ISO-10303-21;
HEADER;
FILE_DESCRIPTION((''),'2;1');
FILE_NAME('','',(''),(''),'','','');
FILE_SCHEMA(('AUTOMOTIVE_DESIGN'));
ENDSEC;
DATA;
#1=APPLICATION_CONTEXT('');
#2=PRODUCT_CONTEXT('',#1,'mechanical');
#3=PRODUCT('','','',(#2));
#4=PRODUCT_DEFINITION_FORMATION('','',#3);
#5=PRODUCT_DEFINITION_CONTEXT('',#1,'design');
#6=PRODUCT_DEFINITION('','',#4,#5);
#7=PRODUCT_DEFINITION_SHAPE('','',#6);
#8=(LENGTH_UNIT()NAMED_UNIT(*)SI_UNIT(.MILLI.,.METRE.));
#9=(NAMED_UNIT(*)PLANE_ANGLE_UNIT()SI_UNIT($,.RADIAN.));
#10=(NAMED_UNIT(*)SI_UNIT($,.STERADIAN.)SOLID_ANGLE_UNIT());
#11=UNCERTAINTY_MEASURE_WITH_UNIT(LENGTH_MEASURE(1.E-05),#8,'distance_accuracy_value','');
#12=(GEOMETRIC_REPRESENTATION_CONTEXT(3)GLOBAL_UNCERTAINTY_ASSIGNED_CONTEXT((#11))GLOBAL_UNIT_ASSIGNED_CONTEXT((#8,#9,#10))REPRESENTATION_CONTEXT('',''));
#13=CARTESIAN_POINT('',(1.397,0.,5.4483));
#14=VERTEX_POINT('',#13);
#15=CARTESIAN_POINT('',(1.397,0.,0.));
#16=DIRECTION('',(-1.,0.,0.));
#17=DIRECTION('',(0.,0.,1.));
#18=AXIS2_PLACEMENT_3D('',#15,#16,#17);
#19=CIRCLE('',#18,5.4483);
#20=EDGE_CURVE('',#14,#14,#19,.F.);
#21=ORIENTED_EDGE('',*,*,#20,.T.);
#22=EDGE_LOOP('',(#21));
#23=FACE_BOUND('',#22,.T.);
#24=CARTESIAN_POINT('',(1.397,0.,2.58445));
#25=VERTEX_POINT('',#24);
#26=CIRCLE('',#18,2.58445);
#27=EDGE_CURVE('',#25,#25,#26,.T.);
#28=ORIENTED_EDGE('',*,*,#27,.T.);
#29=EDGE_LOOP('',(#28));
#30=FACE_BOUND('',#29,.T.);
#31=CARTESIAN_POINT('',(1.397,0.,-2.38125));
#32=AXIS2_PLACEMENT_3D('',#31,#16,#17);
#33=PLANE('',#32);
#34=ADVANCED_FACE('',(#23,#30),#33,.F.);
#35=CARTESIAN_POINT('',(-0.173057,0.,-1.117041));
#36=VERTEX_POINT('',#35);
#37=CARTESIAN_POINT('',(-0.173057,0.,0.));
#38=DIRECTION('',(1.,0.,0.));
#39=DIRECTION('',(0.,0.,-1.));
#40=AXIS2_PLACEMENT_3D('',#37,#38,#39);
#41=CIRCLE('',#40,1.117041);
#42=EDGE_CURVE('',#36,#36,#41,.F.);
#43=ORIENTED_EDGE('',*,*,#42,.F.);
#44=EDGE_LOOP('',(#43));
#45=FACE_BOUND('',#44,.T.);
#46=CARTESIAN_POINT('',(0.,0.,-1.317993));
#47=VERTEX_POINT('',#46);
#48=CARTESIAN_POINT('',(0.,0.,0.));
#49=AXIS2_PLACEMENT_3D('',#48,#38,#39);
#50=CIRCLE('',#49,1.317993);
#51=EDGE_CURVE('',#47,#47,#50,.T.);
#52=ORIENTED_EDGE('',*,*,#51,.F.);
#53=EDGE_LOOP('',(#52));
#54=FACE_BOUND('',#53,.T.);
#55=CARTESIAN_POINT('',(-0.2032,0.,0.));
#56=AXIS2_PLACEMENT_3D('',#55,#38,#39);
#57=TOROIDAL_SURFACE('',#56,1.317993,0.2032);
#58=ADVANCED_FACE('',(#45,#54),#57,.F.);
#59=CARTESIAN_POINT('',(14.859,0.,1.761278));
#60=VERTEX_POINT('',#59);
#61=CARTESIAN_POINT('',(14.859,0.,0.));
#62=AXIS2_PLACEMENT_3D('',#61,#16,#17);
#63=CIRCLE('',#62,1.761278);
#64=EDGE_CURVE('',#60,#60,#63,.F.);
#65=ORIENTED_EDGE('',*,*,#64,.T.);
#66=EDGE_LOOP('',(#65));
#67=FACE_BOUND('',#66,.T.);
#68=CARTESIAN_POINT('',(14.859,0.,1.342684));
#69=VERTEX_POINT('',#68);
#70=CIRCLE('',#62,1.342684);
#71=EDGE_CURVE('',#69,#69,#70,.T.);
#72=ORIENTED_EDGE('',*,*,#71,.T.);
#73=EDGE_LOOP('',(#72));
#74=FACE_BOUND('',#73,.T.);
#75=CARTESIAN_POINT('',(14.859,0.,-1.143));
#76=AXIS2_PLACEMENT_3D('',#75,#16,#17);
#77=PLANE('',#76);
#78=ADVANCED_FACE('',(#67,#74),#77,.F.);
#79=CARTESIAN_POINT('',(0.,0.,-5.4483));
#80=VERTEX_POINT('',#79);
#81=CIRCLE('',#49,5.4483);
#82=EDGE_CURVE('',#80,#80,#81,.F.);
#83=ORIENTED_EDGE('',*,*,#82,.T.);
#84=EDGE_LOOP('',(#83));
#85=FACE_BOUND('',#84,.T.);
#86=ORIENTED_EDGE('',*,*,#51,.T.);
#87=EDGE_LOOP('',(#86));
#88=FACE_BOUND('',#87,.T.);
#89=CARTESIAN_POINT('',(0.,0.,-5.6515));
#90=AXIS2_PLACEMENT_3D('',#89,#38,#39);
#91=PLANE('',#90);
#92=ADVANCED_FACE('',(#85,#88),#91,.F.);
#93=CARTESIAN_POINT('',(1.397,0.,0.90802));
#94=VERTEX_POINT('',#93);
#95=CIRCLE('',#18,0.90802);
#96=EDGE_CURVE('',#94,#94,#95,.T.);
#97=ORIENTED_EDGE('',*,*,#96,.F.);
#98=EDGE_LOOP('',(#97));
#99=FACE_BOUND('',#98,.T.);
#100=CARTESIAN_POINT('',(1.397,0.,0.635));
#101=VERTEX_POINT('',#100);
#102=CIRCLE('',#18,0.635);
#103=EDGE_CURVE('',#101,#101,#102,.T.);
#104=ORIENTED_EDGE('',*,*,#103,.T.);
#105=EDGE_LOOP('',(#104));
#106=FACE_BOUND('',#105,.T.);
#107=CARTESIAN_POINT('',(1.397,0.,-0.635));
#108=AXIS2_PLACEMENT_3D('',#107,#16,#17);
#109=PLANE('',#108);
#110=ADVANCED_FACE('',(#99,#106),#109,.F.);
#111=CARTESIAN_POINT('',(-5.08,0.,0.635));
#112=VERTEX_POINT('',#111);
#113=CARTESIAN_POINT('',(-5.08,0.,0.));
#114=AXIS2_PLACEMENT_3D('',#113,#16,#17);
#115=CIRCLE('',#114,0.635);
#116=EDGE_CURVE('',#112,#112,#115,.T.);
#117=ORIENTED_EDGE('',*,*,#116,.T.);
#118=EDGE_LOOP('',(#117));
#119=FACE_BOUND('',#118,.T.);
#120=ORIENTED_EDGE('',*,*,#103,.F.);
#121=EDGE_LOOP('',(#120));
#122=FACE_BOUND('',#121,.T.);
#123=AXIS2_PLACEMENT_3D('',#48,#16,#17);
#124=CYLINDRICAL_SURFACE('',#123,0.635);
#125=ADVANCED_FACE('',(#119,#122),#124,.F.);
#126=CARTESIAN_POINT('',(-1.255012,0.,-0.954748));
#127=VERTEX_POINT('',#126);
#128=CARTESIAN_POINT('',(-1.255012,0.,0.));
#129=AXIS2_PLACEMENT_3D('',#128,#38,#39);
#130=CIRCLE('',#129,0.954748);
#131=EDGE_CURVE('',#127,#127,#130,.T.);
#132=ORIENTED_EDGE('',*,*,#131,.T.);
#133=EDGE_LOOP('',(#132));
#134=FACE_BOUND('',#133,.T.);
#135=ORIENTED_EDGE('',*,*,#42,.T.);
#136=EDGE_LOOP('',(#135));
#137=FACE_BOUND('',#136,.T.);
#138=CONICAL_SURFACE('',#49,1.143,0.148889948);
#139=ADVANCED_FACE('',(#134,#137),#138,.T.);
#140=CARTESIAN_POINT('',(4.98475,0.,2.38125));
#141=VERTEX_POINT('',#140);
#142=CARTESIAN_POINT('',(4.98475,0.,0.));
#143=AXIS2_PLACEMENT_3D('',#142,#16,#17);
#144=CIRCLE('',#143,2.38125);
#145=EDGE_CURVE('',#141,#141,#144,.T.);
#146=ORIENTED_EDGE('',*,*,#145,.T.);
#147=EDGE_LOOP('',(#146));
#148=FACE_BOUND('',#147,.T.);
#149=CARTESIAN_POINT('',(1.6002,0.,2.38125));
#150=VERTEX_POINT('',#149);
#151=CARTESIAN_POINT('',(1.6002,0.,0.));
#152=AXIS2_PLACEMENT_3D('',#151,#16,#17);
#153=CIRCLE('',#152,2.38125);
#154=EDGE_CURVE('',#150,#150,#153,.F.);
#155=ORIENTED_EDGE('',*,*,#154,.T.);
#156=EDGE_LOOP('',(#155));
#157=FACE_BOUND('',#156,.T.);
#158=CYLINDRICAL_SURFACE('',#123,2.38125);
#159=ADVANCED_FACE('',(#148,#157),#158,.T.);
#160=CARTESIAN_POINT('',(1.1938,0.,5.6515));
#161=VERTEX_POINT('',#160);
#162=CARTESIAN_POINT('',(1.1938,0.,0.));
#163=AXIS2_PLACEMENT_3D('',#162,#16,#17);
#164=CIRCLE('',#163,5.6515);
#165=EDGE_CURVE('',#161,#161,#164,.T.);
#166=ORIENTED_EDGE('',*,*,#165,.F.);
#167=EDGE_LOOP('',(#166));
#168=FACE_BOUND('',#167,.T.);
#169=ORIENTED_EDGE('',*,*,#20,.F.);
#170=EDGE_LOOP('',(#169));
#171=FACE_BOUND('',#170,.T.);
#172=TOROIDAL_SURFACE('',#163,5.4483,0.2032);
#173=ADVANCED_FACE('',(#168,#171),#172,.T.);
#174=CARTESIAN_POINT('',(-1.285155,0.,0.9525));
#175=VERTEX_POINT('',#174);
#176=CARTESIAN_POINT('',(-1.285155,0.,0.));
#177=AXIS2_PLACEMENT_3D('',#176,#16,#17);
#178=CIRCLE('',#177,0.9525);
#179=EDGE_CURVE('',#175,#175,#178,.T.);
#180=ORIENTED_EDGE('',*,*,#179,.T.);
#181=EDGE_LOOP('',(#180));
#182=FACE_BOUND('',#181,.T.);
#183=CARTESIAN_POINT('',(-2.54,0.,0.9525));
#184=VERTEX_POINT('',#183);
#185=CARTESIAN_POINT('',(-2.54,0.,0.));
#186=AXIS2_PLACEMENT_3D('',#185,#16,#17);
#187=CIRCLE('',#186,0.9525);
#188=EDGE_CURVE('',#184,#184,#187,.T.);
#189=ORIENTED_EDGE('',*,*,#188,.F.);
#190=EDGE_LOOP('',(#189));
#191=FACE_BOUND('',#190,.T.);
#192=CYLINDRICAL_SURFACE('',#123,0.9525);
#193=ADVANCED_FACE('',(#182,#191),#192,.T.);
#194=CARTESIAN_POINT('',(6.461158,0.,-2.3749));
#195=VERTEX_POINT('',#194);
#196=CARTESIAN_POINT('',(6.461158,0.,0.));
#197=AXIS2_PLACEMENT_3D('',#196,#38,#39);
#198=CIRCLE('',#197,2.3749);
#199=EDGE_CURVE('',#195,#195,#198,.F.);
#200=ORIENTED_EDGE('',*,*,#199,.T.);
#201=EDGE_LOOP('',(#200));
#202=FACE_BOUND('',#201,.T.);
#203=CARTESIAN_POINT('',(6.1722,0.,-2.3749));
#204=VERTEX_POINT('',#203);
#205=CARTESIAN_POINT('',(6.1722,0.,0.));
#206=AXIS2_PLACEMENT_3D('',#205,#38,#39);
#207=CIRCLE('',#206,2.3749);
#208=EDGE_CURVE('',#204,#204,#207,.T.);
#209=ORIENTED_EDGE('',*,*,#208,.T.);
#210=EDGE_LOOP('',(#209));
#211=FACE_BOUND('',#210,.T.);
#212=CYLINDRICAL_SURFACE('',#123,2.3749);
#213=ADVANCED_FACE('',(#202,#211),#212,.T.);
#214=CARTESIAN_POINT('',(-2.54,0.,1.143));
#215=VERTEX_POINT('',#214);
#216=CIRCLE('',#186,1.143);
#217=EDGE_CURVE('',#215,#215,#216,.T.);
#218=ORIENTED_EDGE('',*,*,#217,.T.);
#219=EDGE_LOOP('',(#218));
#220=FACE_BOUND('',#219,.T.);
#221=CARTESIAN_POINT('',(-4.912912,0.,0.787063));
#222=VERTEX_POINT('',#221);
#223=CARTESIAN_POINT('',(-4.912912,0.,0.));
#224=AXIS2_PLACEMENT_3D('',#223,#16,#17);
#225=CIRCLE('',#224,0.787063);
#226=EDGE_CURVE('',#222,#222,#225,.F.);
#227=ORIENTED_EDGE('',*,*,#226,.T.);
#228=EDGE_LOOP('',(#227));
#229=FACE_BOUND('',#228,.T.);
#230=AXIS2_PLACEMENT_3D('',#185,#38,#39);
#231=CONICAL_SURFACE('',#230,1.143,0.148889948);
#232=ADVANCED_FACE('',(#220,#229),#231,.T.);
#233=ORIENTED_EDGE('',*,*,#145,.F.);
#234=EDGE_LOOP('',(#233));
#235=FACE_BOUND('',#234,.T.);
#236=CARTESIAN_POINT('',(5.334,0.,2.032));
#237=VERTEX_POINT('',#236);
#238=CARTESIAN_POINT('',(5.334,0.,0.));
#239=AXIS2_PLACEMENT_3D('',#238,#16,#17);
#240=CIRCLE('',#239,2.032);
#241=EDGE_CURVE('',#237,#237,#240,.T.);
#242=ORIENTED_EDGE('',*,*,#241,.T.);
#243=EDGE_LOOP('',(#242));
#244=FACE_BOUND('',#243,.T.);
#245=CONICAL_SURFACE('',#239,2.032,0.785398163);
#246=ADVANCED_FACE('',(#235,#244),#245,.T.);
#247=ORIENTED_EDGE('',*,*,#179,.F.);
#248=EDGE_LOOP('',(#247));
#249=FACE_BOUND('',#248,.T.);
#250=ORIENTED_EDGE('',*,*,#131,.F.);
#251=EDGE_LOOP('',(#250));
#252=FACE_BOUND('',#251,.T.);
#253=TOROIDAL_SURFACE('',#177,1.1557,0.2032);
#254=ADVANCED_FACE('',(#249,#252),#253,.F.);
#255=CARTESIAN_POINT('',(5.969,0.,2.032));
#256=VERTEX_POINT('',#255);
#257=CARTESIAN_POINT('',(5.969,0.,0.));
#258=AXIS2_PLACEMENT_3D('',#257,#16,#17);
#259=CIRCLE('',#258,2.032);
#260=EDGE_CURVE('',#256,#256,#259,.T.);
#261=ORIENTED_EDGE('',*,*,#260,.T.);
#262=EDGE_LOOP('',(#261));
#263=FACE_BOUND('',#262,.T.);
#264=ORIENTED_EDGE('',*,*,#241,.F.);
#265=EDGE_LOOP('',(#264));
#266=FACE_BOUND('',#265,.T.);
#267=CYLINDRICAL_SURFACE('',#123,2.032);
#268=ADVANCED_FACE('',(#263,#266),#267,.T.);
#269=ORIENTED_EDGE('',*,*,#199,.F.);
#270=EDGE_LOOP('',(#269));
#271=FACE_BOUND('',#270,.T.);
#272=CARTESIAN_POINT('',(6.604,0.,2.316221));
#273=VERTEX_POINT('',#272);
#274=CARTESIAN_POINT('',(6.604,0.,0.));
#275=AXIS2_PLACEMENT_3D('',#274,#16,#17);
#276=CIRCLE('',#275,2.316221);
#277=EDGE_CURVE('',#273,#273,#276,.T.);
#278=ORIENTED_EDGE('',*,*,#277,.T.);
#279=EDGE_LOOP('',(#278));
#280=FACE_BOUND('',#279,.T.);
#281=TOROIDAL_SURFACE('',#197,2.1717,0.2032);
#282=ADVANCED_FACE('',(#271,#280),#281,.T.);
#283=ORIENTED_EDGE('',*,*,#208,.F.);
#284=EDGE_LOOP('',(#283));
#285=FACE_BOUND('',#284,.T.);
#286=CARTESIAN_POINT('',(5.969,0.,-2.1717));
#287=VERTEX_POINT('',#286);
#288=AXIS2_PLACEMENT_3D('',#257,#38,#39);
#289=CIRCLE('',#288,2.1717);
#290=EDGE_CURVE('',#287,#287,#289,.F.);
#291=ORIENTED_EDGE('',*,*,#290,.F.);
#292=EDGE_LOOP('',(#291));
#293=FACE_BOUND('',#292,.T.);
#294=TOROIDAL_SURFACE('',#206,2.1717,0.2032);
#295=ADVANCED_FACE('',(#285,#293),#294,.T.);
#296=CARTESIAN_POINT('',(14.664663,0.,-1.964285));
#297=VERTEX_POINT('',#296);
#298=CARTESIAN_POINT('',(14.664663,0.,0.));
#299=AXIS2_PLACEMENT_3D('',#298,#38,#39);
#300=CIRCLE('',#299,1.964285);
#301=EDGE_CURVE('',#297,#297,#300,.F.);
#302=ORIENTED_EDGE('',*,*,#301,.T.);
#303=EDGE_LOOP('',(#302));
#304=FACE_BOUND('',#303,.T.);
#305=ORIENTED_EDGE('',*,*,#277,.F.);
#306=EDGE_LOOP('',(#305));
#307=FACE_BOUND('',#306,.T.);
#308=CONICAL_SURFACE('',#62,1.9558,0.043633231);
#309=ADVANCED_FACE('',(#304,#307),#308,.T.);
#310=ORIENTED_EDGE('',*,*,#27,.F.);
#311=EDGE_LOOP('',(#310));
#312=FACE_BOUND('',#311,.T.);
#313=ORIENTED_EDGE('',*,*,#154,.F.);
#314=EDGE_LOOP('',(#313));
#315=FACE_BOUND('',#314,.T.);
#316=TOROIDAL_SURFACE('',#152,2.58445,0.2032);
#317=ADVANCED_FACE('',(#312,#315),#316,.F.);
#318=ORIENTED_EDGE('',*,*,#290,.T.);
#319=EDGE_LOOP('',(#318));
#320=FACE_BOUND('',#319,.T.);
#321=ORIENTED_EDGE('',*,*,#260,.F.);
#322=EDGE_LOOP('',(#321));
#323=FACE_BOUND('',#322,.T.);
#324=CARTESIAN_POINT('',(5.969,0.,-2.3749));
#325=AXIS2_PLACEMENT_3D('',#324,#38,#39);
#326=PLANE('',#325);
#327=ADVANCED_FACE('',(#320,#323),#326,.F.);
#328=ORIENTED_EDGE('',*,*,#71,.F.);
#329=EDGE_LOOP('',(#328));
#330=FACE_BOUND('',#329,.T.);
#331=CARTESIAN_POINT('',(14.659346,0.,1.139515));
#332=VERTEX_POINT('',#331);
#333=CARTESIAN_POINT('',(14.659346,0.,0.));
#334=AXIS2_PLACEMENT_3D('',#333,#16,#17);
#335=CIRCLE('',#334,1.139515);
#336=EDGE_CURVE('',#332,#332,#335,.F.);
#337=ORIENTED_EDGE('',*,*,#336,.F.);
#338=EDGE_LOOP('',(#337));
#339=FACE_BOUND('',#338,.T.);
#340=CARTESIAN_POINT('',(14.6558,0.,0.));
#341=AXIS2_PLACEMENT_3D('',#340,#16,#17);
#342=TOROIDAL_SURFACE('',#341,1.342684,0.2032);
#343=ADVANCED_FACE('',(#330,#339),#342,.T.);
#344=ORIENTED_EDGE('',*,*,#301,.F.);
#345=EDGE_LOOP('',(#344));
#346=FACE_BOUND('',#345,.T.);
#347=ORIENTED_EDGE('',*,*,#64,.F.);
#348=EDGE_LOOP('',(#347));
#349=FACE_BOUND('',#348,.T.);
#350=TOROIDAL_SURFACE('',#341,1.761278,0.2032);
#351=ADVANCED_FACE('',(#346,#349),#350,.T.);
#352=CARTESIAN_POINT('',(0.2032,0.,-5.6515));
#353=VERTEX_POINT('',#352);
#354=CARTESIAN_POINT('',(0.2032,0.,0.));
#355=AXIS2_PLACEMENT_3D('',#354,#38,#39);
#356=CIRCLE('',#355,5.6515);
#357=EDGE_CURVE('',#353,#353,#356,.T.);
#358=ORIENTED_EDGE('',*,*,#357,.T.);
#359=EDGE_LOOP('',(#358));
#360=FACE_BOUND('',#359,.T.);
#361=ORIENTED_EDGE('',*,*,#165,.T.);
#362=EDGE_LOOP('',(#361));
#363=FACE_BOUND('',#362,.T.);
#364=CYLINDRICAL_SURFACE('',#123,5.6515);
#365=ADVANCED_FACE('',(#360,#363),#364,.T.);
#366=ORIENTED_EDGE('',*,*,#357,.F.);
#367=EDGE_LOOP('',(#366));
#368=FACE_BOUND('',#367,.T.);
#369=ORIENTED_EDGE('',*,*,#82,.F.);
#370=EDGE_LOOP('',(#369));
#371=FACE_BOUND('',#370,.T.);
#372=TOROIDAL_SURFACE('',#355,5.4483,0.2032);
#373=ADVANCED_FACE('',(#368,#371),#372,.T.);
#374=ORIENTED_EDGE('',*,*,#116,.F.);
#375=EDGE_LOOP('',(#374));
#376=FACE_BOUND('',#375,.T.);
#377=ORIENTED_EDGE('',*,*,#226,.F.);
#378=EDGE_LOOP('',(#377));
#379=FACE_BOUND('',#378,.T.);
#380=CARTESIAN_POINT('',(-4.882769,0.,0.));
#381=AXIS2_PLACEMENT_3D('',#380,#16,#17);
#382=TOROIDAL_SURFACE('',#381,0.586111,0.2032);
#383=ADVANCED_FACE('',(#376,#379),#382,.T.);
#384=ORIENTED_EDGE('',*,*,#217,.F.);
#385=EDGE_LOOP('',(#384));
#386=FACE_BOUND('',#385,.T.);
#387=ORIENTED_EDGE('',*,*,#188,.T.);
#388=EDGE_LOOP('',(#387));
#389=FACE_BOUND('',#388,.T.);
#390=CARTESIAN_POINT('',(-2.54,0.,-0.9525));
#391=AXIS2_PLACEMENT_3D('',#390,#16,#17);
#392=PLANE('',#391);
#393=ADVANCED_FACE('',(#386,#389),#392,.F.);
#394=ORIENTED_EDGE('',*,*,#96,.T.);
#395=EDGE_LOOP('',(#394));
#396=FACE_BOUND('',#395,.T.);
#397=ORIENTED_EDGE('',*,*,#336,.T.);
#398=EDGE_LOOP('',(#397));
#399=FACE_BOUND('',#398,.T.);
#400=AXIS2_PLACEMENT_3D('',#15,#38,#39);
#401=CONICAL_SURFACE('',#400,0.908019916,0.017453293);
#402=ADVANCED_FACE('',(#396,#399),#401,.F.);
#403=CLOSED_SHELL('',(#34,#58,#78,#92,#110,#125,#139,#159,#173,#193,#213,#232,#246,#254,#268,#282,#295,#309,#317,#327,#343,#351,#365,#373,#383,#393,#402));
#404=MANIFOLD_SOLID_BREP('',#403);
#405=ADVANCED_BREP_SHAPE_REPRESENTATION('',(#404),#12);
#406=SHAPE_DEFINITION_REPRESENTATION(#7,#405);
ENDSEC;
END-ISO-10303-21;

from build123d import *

# Parameters (mm, degrees)
FILLET1_R = 0.2032


with BuildPart() as part:
    # Sketch1 → Revolve1 (revolve)
    with BuildSketch(Plane(origin=(0, 0, 0), x_dir=(1, 0, 0), z_dir=(0, 1, 0)), mode=Mode.PRIVATE) as revolve1_sk:
        Polygon((1.3970000000000002, 0.9080199159363341), (14.858999999999998, 1.143), (14.858999999999998, 1.9557999999999998), (6.603999999999999, 2.3162210837097064), (6.603999999999999, 2.3749000000000002), (5.9689999999999985, 2.3749000000000002), (5.9689999999999985, 2.032), (5.333999999999999, 2.0319999999999996), (4.98475, 2.38125), (1.3970000000000005, 2.381249999999999), (1.3970000000000005, 5.6515), (0, 5.6515), (5.5e-16, 1.143), (-1.2699999999999994, 0.9525000000000002), (-2.5400000000000005, 0.9525000000000001), (-2.5400000000000005, 1.143), (-5.079999999999999, 0.762), (-5.079999999999999, 0.635), (1.397000000000001, 0.635), align=None)
    revolve(revolve1_sk.sketch.rotate(Axis((0, 0, 0), (1, 0, 0)), 180), axis=Axis((0, 0, 0), (1, 0, 0)))

    # Fillet1
    # the kernel refuses this fillet: 0.2032 mm, written as the material it adds along each edge
    with BuildSketch(Plane(origin=(-1.2699999999999994, 0, 0), x_dir=(0, 1.2e-16, 1), z_dir=(0, 1, -1.2e-16))) as fillet1_piece_1:
        with BuildLine():
            CenterArc((0.9525000000000002 + FILLET1_R, -FILLET1_R * 0.0745828053856), FILLET1_R, 171.46923439005187, 8.530765609948162)
            Line((0.9525000000000001, -FILLET1_R * 0.0745828053856), (0.9525000000000002, 0))
            Line((0.9525000000000002, 0), (0.9525000000000002 + FILLET1_R * 0.0110636471317, FILLET1_R * 0.0737576475447))
        make_face()
    revolve(axis=Axis((-1.2699999999999994, 0, 0), (1, 0, 0)))
    with BuildSketch(Plane(origin=(5.5e-16, 0, 0), x_dir=(0, 1.2e-16, 1), z_dir=(0, 1, -1.2e-16))) as fillet1_piece_2:
        with BuildLine():
            CenterArc((1.143 + FILLET1_R * 0.861187420808, -FILLET1_R), FILLET1_R, 90, 81.46923439005175)
            Line((1.143 - FILLET1_R * 0.12774893206, -FILLET1_R * 0.85165954707), (1.143, 0))
            Line((1.143, 0), (1.143 + FILLET1_R * 0.861187420808, -5.5e-16))
        make_face()
    revolve(axis=Axis((5.5e-16, 0, 0), (1, 0, 0)))
    with BuildSketch(Plane(origin=(1.3970000000000005, 0, 0), x_dir=(0, 1.2e-16, 1), z_dir=(0, 1, -1.2e-16))) as fillet1_piece_3:
        with BuildLine():
            CenterArc((2.381249999999999 + FILLET1_R, FILLET1_R), FILLET1_R, 180, 89.99999999999977)
            Line((2.381249999999999 + FILLET1_R, 0), (2.381249999999999, 0))
            Line((2.381249999999999, 0), (2.38125, FILLET1_R))
        make_face()
    revolve(axis=Axis((1.3970000000000005, 0, 0), (1, 0, 0)))
    # the kernel refuses this fillet: 0.2032 mm, written as the material it takes off along each edge
    with BuildSketch(Plane(origin=(-5.079999999999999, 0, 0), x_dir=(0, 1.2e-16, 1), z_dir=(0, 1, -1.2e-16))) as fillet1_2_piece_1:
        with BuildLine():
            CenterArc((0.5861113953629584, 0.19723119514073506), FILLET1_R, 283.92157342879153, 67.54766096126022)
            Line((0.7870632622657965, 0.16708841510530892), (0.762, 0))
            Line((0.762, 0), (0.6350000000000002, -8.9e-16))
        make_face()
    revolve(axis=Axis((-5.079999999999999, 0, 0), (1, 0, 0)), mode=Mode.SUBTRACT)
    with BuildSketch(Plane(origin=(0, 0, 0), x_dir=(0, 1.2e-16, 1), z_dir=(0, 1, -1.2e-16))) as fillet1_2_piece_2:
        with BuildLine():
            CenterArc((5.6515 - FILLET1_R, FILLET1_R), FILLET1_R, 270, 90.00000000000001)
            Line((5.6515, FILLET1_R), (5.6515, 0))
            Line((5.6515, 0), (5.6515 - FILLET1_R, 0))
        make_face()
    revolve(axis=Axis((0, 0, 0), (1, 0, 0)), mode=Mode.SUBTRACT)
    with BuildSketch(Plane(origin=(1.3970000000000005, 0, 0), x_dir=(0, 1.2e-16, 1), z_dir=(0, 1, -1.2e-16))) as fillet1_2_piece_3:
        with BuildLine():
            CenterArc((5.6515 - FILLET1_R, -FILLET1_R), FILLET1_R, 0, 90)
            Line((5.6515, -FILLET1_R), (5.6515, 0))
            Line((5.6515, 0), (5.6515 - FILLET1_R, 0))
        make_face()
    revolve(axis=Axis((1.3970000000000005, 0, 0), (1, 0, 0)), mode=Mode.SUBTRACT)
    with BuildSketch(Plane(origin=(5.9689999999999985, 0, 0), x_dir=(0, 1.2e-16, 1), z_dir=(0, 1, -1.2e-16))) as fillet1_2_piece_4:
        with BuildLine():
            CenterArc((2.3749000000000002 - FILLET1_R, FILLET1_R), FILLET1_R, 270, 90)
            Line((2.3749000000000002 - FILLET1_R, 0), (2.3749000000000002, 0))
            Line((2.3749000000000002, 0), (2.3749000000000002, FILLET1_R))
        make_face()
    revolve(axis=Axis((5.9689999999999985, 0, 0), (1, 0, 0)), mode=Mode.SUBTRACT)
    with BuildSketch(Plane(origin=(6.603999999999999, 0, 0), x_dir=(0, 1.2e-16, 1), z_dir=(0, 1, -1.2e-16))) as fillet1_2_piece_5:
        with BuildLine():
            CenterArc((2.1717000000000004, -0.14284220791969027), FILLET1_R, 0, 44.66526203773208)
            Line((2.3749000000000002, -0.14284220791969027), (2.3749000000000002, 0))
            Line((2.3749000000000002, 0), (2.316221083709707, 0))
        make_face()
    revolve(axis=Axis((6.603999999999999, 0, 0), (1, 0, 0)), mode=Mode.SUBTRACT)
    with BuildSketch(Plane(origin=(14.858999999999998, 0, 0), x_dir=(0, 1.2e-16, 1), z_dir=(0, 1, -1.2e-16))) as fillet1_2_piece_6:
        with BuildLine():
            CenterArc((1.9557999999999998 - FILLET1_R * 0.957291742255, -FILLET1_R), FILLET1_R, 2.4999999999998623, 87.50000000000011)
            Line((1.9557999999999998 + FILLET1_R * 0.041756479327, -FILLET1_R * 0.956380612635), (1.9557999999999998, 0))
            Line((1.9557999999999998, 0), (1.9557999999999998 - FILLET1_R * 0.957291742255, 0))
        make_face()
    revolve(axis=Axis((14.858999999999998, 0, 0), (1, 0, 0)), mode=Mode.SUBTRACT)
    with BuildSketch(Plane(origin=(14.858999999999998, 0, 0), x_dir=(0, 1.2e-16, 1), z_dir=(0, 1, -1.2e-16))) as fillet1_2_piece_7:
        with BuildLine():
            CenterArc((1.143 + FILLET1_R * 0.982697263116, -FILLET1_R), FILLET1_R, 90.00000000000006, 88.99999999999983)
            Line((1.143 + FILLET1_R * 0.982697263116, 1.78e-15), (1.143, 0))
            Line((1.143, 0), (1.143 - FILLET1_R * 0.0171504320407, -FILLET1_R * 0.982547593563))
        make_face()
    revolve(axis=Axis((14.858999999999998, 0, 0), (1, 0, 0)), mode=Mode.SUBTRACT)


solid = part.part
